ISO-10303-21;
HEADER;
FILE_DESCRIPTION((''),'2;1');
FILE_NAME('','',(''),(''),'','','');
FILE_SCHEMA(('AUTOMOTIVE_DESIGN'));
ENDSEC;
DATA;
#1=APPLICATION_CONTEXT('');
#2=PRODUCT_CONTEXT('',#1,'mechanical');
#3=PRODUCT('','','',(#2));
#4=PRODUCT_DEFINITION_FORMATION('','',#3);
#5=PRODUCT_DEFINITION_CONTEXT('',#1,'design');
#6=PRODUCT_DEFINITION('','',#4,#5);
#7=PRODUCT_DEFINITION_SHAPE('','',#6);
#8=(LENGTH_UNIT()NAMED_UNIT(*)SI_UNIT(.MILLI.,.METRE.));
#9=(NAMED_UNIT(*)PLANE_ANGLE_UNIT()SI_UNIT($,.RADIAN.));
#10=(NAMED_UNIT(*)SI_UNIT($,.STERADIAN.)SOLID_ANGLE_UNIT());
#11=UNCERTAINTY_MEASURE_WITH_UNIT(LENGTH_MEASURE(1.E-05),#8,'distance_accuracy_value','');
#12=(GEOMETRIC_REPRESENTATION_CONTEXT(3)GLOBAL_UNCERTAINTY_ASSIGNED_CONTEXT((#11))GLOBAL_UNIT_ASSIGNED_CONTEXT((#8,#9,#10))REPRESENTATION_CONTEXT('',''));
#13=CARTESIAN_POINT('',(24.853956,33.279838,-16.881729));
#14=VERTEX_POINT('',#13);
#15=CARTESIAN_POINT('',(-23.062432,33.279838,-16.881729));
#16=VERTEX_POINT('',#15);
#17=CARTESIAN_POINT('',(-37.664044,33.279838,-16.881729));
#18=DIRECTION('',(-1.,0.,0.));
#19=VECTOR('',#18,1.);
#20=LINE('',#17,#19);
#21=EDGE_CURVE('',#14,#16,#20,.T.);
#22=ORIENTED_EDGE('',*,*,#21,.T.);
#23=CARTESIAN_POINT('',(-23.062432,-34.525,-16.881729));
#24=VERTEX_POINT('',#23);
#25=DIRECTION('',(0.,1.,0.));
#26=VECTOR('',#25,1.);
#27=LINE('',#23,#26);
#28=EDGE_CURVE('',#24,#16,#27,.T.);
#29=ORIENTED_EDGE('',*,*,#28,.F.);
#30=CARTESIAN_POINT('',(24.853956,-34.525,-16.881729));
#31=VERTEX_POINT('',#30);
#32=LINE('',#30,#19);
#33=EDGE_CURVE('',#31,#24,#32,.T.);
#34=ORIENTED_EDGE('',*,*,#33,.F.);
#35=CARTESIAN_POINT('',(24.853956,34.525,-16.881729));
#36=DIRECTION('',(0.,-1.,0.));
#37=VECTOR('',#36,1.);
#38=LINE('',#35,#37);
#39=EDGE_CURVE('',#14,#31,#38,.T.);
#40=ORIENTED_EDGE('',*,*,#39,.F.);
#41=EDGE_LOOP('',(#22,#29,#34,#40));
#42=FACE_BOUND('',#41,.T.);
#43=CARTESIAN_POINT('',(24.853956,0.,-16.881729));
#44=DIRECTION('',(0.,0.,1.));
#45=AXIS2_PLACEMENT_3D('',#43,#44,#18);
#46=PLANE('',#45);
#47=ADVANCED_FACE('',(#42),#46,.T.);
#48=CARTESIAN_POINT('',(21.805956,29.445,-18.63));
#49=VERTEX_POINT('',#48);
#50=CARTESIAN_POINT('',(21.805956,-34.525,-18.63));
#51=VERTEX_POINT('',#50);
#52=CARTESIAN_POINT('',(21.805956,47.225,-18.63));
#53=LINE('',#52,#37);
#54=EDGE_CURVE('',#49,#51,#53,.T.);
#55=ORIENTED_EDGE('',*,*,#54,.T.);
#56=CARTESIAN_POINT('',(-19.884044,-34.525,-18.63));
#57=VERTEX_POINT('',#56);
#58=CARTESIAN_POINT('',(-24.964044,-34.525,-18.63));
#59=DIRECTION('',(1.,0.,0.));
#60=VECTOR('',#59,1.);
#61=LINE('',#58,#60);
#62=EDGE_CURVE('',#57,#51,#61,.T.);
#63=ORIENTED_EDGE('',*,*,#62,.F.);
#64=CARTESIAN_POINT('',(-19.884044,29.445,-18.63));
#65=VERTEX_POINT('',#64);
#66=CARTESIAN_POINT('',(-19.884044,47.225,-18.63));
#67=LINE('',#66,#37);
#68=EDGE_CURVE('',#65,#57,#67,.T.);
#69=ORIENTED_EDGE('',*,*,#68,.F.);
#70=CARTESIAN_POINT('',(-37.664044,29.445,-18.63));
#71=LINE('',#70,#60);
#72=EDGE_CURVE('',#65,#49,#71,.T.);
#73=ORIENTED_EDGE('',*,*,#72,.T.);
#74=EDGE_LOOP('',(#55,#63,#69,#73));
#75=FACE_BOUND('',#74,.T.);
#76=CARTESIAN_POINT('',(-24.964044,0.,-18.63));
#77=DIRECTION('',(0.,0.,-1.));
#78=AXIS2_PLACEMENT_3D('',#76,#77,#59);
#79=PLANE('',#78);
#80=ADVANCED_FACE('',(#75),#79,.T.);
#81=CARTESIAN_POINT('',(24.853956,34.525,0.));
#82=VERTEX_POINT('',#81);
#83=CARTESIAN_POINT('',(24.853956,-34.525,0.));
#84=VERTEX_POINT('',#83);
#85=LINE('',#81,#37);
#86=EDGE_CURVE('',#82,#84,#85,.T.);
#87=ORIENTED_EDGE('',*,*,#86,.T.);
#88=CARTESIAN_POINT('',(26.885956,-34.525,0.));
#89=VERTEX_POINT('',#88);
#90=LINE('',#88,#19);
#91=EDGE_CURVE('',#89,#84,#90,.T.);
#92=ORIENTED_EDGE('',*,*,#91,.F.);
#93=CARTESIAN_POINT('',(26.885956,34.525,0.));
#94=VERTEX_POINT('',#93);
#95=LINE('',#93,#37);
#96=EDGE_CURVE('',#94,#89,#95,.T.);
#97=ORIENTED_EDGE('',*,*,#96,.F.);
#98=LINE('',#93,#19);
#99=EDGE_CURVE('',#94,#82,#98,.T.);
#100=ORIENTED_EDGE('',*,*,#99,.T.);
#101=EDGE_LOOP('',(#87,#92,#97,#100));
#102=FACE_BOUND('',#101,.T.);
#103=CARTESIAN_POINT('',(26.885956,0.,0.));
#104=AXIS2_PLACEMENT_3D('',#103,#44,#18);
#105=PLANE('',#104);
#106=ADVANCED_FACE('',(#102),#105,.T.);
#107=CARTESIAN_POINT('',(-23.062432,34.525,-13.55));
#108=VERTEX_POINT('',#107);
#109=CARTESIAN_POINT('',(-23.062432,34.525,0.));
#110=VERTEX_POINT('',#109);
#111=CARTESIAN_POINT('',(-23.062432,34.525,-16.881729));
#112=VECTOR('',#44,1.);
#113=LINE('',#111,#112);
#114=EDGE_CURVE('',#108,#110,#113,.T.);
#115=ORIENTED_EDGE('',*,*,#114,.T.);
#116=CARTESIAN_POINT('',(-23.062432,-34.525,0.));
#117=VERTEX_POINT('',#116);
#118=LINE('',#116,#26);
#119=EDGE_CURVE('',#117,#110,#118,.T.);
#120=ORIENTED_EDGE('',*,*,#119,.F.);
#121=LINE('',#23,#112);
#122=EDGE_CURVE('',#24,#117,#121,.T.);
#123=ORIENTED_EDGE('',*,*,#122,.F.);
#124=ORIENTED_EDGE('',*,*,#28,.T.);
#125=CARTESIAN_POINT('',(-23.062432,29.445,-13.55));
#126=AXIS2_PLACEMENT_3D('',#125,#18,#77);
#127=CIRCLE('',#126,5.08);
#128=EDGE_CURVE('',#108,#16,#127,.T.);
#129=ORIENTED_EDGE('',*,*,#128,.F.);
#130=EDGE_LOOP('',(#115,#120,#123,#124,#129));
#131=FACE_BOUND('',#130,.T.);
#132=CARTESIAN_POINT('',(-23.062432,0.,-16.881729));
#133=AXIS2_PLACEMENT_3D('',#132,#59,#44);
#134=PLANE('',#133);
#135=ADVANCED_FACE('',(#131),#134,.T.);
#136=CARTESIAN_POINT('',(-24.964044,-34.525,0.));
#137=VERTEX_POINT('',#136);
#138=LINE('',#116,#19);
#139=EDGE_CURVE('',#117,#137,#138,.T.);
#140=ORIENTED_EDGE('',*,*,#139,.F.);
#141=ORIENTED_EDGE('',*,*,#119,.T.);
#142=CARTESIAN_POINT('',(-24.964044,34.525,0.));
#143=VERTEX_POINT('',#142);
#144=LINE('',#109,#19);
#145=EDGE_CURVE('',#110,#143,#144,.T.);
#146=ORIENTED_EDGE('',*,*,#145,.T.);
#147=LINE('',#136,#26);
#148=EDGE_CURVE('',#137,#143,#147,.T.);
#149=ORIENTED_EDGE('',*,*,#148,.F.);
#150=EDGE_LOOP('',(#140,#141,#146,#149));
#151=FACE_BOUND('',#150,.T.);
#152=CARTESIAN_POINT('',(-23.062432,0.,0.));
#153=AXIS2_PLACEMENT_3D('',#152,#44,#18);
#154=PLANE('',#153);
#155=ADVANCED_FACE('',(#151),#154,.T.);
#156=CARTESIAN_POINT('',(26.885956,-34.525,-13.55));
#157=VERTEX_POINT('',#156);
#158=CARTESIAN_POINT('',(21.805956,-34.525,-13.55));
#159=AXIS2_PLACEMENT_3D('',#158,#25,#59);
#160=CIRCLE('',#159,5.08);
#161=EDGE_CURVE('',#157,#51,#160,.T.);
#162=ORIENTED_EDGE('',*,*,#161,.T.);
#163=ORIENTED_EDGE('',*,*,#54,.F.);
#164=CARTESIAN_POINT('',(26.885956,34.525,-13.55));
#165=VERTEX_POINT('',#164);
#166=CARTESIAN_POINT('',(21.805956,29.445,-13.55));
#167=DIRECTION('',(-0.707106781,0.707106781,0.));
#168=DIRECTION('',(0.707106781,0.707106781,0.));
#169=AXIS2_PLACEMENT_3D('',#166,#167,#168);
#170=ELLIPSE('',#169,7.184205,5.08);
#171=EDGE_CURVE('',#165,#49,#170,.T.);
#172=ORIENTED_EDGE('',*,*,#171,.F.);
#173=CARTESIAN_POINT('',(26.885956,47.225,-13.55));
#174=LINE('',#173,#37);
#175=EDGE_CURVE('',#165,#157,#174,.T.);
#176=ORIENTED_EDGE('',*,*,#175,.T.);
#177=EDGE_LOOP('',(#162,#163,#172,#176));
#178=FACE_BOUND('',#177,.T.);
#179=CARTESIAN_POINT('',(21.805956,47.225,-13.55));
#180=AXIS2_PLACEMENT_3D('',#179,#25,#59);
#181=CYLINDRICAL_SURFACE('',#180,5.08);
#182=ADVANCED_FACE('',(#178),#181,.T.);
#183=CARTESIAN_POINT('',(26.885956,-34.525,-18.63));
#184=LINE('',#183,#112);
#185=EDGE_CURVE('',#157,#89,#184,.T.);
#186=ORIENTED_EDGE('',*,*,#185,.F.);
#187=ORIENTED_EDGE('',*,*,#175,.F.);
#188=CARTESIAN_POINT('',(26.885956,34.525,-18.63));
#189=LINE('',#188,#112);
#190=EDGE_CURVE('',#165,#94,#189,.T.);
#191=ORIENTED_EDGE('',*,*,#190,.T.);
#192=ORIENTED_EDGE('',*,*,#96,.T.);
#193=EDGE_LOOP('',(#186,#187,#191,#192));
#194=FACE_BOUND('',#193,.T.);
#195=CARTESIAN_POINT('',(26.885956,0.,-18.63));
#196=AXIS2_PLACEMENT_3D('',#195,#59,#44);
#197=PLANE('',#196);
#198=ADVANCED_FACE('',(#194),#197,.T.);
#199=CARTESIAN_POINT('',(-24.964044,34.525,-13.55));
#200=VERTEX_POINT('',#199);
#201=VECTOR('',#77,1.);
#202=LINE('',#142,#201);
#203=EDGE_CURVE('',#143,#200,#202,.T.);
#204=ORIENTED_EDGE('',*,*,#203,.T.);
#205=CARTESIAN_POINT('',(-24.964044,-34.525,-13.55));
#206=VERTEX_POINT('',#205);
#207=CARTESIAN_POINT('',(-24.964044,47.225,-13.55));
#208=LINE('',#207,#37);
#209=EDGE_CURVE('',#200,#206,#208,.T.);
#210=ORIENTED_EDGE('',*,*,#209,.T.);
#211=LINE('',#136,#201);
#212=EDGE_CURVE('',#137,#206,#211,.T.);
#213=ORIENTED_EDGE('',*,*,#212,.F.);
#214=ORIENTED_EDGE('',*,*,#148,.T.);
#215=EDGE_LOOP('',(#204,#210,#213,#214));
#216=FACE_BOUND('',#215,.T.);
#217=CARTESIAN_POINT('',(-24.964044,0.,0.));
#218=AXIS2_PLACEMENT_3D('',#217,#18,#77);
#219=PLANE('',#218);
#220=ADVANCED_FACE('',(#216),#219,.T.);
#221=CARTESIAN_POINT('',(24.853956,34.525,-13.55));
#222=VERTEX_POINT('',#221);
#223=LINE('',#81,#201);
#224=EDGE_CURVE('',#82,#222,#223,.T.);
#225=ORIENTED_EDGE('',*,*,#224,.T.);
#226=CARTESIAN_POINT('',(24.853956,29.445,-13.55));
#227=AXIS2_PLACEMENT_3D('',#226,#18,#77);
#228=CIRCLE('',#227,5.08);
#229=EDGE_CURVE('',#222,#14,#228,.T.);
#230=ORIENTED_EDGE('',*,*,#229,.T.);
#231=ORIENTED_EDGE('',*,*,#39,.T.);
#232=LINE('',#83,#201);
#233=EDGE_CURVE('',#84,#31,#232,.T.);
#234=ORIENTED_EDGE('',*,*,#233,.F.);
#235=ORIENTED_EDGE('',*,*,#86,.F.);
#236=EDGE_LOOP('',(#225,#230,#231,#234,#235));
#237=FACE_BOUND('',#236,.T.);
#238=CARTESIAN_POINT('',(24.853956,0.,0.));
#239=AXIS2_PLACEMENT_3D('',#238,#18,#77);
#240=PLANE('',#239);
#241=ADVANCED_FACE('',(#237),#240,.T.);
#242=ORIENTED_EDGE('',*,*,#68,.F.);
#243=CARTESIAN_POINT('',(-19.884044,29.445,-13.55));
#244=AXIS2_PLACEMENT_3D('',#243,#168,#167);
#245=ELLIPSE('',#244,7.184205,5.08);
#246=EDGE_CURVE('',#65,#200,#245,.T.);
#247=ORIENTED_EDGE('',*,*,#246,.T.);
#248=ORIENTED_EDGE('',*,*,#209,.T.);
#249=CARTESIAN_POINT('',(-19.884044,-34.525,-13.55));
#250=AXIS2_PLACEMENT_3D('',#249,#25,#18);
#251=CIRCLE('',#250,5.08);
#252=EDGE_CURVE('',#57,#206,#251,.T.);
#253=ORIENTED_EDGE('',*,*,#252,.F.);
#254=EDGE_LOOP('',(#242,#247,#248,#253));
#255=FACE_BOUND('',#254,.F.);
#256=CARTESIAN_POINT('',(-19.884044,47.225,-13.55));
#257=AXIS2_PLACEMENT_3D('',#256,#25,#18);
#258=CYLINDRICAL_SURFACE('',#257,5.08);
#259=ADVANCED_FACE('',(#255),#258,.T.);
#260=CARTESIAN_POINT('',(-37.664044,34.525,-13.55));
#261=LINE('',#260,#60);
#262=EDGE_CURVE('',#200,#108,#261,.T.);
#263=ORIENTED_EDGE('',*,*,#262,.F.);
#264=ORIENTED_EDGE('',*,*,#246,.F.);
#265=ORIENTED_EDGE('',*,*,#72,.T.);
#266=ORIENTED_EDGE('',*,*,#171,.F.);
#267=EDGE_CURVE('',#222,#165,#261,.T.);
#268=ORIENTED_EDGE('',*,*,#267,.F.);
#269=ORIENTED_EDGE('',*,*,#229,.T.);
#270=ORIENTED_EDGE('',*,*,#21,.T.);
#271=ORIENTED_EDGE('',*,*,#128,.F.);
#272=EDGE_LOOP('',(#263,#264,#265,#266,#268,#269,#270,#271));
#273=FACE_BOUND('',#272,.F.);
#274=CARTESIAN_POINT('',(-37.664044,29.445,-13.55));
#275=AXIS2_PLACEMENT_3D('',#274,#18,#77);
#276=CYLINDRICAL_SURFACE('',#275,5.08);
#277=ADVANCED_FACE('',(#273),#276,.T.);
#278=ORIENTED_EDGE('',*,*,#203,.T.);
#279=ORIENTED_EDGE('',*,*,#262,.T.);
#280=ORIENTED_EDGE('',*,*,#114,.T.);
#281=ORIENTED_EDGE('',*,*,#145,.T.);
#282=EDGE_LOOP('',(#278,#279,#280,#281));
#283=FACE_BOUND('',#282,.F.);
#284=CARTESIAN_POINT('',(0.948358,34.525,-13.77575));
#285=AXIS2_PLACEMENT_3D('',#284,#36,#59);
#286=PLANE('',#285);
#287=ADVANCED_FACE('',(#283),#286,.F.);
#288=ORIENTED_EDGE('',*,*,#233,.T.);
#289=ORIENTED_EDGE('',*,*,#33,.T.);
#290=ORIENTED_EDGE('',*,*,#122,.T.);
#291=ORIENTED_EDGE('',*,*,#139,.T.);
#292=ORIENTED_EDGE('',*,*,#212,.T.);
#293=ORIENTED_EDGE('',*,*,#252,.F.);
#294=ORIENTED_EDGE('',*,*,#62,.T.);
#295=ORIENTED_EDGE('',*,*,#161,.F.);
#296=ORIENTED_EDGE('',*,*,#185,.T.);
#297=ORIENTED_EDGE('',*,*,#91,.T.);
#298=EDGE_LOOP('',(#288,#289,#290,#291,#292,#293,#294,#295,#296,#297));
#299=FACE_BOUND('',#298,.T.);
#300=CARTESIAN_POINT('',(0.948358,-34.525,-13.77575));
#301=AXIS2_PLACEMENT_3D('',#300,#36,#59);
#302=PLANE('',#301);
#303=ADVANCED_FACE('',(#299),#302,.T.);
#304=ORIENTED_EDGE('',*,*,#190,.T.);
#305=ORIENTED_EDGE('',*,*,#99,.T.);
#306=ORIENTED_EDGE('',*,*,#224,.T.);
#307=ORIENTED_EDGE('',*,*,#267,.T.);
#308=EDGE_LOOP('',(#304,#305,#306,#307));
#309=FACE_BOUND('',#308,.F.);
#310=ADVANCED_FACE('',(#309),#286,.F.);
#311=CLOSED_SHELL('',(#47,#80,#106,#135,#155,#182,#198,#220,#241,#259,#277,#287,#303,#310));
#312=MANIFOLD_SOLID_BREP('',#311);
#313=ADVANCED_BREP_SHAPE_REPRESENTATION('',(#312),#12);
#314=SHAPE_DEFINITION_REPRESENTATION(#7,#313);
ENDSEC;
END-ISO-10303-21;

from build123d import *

# Parameters (mm, degrees)
F1_DEPTH    = 34.52499953
F2_T1_DEPTH = 94.44999906
F2_T3_DEPTH = 77.25000044


# Not quite as in the source:
# - a fillet or chamfer that OpenCascade refuses, or shapes differently, is made with other operations: its cross-section is extruded or revolved along the edge and cut away or added


with BuildPart() as f1:
    # F0 (on Front) → F1 (new body, symmetric)
    with BuildSketch(Plane.XZ):
        Polygon((-24.9640439777, 0), (-24.9640439777, -18.630000078), (26.8859564623, -18.630000078), (26.8859564623, 0), (24.8539564623, 0), (24.8539564623, -16.881729), (-23.0624323377, -16.881729), (-23.0624323377, 0), align=None)
    extrude(amount=F1_DEPTH, both=True)

    # F2: fillet of radius 5.08 on 3 edges, made by hand

    # F2_s2 → F2_t1 (cut)
    with BuildSketch(Plane.XZ.offset(-47.22499953)):
        with BuildLine():
            ThreePointArc((26.8859564623, -13.550000078), (25.3980589107, -17.1421025264), (21.8059564623, -18.630000078))
            Line((21.8059564623, -18.630000078), (26.8859564623, -18.630000078))
            Line((26.8859564623, -18.630000078), (26.8859564623, -13.550000078))
        make_face()
        with BuildLine():
            ThreePointArc((-24.9640439777, -13.550000078), (-23.4761464261, -17.1421025264), (-19.8840439777, -18.630000078))
            Line((-19.8840439777, -18.630000078), (-24.9640439777, -18.630000078))
            Line((-24.9640439777, -18.630000078), (-24.9640439777, -13.550000078))
        make_face()
    extrude(amount=F2_T1_DEPTH, mode=Mode.SUBTRACT)

    # F2_s4 → F2_t3 (cut)
    with BuildSketch(Plane.YZ.offset(-37.6640439777)):
        with BuildLine():
            ThreePointArc((29.44499953, -18.630000078), (33.0371019784, -17.1421025264), (34.52499953, -13.550000078))
            Line((34.52499953, -13.550000078), (34.52499953, -18.630000078))
            Line((34.52499953, -18.630000078), (29.44499953, -18.630000078))
        make_face()
    extrude(amount=F2_T3_DEPTH, mode=Mode.SUBTRACT)


solid = f1.part
